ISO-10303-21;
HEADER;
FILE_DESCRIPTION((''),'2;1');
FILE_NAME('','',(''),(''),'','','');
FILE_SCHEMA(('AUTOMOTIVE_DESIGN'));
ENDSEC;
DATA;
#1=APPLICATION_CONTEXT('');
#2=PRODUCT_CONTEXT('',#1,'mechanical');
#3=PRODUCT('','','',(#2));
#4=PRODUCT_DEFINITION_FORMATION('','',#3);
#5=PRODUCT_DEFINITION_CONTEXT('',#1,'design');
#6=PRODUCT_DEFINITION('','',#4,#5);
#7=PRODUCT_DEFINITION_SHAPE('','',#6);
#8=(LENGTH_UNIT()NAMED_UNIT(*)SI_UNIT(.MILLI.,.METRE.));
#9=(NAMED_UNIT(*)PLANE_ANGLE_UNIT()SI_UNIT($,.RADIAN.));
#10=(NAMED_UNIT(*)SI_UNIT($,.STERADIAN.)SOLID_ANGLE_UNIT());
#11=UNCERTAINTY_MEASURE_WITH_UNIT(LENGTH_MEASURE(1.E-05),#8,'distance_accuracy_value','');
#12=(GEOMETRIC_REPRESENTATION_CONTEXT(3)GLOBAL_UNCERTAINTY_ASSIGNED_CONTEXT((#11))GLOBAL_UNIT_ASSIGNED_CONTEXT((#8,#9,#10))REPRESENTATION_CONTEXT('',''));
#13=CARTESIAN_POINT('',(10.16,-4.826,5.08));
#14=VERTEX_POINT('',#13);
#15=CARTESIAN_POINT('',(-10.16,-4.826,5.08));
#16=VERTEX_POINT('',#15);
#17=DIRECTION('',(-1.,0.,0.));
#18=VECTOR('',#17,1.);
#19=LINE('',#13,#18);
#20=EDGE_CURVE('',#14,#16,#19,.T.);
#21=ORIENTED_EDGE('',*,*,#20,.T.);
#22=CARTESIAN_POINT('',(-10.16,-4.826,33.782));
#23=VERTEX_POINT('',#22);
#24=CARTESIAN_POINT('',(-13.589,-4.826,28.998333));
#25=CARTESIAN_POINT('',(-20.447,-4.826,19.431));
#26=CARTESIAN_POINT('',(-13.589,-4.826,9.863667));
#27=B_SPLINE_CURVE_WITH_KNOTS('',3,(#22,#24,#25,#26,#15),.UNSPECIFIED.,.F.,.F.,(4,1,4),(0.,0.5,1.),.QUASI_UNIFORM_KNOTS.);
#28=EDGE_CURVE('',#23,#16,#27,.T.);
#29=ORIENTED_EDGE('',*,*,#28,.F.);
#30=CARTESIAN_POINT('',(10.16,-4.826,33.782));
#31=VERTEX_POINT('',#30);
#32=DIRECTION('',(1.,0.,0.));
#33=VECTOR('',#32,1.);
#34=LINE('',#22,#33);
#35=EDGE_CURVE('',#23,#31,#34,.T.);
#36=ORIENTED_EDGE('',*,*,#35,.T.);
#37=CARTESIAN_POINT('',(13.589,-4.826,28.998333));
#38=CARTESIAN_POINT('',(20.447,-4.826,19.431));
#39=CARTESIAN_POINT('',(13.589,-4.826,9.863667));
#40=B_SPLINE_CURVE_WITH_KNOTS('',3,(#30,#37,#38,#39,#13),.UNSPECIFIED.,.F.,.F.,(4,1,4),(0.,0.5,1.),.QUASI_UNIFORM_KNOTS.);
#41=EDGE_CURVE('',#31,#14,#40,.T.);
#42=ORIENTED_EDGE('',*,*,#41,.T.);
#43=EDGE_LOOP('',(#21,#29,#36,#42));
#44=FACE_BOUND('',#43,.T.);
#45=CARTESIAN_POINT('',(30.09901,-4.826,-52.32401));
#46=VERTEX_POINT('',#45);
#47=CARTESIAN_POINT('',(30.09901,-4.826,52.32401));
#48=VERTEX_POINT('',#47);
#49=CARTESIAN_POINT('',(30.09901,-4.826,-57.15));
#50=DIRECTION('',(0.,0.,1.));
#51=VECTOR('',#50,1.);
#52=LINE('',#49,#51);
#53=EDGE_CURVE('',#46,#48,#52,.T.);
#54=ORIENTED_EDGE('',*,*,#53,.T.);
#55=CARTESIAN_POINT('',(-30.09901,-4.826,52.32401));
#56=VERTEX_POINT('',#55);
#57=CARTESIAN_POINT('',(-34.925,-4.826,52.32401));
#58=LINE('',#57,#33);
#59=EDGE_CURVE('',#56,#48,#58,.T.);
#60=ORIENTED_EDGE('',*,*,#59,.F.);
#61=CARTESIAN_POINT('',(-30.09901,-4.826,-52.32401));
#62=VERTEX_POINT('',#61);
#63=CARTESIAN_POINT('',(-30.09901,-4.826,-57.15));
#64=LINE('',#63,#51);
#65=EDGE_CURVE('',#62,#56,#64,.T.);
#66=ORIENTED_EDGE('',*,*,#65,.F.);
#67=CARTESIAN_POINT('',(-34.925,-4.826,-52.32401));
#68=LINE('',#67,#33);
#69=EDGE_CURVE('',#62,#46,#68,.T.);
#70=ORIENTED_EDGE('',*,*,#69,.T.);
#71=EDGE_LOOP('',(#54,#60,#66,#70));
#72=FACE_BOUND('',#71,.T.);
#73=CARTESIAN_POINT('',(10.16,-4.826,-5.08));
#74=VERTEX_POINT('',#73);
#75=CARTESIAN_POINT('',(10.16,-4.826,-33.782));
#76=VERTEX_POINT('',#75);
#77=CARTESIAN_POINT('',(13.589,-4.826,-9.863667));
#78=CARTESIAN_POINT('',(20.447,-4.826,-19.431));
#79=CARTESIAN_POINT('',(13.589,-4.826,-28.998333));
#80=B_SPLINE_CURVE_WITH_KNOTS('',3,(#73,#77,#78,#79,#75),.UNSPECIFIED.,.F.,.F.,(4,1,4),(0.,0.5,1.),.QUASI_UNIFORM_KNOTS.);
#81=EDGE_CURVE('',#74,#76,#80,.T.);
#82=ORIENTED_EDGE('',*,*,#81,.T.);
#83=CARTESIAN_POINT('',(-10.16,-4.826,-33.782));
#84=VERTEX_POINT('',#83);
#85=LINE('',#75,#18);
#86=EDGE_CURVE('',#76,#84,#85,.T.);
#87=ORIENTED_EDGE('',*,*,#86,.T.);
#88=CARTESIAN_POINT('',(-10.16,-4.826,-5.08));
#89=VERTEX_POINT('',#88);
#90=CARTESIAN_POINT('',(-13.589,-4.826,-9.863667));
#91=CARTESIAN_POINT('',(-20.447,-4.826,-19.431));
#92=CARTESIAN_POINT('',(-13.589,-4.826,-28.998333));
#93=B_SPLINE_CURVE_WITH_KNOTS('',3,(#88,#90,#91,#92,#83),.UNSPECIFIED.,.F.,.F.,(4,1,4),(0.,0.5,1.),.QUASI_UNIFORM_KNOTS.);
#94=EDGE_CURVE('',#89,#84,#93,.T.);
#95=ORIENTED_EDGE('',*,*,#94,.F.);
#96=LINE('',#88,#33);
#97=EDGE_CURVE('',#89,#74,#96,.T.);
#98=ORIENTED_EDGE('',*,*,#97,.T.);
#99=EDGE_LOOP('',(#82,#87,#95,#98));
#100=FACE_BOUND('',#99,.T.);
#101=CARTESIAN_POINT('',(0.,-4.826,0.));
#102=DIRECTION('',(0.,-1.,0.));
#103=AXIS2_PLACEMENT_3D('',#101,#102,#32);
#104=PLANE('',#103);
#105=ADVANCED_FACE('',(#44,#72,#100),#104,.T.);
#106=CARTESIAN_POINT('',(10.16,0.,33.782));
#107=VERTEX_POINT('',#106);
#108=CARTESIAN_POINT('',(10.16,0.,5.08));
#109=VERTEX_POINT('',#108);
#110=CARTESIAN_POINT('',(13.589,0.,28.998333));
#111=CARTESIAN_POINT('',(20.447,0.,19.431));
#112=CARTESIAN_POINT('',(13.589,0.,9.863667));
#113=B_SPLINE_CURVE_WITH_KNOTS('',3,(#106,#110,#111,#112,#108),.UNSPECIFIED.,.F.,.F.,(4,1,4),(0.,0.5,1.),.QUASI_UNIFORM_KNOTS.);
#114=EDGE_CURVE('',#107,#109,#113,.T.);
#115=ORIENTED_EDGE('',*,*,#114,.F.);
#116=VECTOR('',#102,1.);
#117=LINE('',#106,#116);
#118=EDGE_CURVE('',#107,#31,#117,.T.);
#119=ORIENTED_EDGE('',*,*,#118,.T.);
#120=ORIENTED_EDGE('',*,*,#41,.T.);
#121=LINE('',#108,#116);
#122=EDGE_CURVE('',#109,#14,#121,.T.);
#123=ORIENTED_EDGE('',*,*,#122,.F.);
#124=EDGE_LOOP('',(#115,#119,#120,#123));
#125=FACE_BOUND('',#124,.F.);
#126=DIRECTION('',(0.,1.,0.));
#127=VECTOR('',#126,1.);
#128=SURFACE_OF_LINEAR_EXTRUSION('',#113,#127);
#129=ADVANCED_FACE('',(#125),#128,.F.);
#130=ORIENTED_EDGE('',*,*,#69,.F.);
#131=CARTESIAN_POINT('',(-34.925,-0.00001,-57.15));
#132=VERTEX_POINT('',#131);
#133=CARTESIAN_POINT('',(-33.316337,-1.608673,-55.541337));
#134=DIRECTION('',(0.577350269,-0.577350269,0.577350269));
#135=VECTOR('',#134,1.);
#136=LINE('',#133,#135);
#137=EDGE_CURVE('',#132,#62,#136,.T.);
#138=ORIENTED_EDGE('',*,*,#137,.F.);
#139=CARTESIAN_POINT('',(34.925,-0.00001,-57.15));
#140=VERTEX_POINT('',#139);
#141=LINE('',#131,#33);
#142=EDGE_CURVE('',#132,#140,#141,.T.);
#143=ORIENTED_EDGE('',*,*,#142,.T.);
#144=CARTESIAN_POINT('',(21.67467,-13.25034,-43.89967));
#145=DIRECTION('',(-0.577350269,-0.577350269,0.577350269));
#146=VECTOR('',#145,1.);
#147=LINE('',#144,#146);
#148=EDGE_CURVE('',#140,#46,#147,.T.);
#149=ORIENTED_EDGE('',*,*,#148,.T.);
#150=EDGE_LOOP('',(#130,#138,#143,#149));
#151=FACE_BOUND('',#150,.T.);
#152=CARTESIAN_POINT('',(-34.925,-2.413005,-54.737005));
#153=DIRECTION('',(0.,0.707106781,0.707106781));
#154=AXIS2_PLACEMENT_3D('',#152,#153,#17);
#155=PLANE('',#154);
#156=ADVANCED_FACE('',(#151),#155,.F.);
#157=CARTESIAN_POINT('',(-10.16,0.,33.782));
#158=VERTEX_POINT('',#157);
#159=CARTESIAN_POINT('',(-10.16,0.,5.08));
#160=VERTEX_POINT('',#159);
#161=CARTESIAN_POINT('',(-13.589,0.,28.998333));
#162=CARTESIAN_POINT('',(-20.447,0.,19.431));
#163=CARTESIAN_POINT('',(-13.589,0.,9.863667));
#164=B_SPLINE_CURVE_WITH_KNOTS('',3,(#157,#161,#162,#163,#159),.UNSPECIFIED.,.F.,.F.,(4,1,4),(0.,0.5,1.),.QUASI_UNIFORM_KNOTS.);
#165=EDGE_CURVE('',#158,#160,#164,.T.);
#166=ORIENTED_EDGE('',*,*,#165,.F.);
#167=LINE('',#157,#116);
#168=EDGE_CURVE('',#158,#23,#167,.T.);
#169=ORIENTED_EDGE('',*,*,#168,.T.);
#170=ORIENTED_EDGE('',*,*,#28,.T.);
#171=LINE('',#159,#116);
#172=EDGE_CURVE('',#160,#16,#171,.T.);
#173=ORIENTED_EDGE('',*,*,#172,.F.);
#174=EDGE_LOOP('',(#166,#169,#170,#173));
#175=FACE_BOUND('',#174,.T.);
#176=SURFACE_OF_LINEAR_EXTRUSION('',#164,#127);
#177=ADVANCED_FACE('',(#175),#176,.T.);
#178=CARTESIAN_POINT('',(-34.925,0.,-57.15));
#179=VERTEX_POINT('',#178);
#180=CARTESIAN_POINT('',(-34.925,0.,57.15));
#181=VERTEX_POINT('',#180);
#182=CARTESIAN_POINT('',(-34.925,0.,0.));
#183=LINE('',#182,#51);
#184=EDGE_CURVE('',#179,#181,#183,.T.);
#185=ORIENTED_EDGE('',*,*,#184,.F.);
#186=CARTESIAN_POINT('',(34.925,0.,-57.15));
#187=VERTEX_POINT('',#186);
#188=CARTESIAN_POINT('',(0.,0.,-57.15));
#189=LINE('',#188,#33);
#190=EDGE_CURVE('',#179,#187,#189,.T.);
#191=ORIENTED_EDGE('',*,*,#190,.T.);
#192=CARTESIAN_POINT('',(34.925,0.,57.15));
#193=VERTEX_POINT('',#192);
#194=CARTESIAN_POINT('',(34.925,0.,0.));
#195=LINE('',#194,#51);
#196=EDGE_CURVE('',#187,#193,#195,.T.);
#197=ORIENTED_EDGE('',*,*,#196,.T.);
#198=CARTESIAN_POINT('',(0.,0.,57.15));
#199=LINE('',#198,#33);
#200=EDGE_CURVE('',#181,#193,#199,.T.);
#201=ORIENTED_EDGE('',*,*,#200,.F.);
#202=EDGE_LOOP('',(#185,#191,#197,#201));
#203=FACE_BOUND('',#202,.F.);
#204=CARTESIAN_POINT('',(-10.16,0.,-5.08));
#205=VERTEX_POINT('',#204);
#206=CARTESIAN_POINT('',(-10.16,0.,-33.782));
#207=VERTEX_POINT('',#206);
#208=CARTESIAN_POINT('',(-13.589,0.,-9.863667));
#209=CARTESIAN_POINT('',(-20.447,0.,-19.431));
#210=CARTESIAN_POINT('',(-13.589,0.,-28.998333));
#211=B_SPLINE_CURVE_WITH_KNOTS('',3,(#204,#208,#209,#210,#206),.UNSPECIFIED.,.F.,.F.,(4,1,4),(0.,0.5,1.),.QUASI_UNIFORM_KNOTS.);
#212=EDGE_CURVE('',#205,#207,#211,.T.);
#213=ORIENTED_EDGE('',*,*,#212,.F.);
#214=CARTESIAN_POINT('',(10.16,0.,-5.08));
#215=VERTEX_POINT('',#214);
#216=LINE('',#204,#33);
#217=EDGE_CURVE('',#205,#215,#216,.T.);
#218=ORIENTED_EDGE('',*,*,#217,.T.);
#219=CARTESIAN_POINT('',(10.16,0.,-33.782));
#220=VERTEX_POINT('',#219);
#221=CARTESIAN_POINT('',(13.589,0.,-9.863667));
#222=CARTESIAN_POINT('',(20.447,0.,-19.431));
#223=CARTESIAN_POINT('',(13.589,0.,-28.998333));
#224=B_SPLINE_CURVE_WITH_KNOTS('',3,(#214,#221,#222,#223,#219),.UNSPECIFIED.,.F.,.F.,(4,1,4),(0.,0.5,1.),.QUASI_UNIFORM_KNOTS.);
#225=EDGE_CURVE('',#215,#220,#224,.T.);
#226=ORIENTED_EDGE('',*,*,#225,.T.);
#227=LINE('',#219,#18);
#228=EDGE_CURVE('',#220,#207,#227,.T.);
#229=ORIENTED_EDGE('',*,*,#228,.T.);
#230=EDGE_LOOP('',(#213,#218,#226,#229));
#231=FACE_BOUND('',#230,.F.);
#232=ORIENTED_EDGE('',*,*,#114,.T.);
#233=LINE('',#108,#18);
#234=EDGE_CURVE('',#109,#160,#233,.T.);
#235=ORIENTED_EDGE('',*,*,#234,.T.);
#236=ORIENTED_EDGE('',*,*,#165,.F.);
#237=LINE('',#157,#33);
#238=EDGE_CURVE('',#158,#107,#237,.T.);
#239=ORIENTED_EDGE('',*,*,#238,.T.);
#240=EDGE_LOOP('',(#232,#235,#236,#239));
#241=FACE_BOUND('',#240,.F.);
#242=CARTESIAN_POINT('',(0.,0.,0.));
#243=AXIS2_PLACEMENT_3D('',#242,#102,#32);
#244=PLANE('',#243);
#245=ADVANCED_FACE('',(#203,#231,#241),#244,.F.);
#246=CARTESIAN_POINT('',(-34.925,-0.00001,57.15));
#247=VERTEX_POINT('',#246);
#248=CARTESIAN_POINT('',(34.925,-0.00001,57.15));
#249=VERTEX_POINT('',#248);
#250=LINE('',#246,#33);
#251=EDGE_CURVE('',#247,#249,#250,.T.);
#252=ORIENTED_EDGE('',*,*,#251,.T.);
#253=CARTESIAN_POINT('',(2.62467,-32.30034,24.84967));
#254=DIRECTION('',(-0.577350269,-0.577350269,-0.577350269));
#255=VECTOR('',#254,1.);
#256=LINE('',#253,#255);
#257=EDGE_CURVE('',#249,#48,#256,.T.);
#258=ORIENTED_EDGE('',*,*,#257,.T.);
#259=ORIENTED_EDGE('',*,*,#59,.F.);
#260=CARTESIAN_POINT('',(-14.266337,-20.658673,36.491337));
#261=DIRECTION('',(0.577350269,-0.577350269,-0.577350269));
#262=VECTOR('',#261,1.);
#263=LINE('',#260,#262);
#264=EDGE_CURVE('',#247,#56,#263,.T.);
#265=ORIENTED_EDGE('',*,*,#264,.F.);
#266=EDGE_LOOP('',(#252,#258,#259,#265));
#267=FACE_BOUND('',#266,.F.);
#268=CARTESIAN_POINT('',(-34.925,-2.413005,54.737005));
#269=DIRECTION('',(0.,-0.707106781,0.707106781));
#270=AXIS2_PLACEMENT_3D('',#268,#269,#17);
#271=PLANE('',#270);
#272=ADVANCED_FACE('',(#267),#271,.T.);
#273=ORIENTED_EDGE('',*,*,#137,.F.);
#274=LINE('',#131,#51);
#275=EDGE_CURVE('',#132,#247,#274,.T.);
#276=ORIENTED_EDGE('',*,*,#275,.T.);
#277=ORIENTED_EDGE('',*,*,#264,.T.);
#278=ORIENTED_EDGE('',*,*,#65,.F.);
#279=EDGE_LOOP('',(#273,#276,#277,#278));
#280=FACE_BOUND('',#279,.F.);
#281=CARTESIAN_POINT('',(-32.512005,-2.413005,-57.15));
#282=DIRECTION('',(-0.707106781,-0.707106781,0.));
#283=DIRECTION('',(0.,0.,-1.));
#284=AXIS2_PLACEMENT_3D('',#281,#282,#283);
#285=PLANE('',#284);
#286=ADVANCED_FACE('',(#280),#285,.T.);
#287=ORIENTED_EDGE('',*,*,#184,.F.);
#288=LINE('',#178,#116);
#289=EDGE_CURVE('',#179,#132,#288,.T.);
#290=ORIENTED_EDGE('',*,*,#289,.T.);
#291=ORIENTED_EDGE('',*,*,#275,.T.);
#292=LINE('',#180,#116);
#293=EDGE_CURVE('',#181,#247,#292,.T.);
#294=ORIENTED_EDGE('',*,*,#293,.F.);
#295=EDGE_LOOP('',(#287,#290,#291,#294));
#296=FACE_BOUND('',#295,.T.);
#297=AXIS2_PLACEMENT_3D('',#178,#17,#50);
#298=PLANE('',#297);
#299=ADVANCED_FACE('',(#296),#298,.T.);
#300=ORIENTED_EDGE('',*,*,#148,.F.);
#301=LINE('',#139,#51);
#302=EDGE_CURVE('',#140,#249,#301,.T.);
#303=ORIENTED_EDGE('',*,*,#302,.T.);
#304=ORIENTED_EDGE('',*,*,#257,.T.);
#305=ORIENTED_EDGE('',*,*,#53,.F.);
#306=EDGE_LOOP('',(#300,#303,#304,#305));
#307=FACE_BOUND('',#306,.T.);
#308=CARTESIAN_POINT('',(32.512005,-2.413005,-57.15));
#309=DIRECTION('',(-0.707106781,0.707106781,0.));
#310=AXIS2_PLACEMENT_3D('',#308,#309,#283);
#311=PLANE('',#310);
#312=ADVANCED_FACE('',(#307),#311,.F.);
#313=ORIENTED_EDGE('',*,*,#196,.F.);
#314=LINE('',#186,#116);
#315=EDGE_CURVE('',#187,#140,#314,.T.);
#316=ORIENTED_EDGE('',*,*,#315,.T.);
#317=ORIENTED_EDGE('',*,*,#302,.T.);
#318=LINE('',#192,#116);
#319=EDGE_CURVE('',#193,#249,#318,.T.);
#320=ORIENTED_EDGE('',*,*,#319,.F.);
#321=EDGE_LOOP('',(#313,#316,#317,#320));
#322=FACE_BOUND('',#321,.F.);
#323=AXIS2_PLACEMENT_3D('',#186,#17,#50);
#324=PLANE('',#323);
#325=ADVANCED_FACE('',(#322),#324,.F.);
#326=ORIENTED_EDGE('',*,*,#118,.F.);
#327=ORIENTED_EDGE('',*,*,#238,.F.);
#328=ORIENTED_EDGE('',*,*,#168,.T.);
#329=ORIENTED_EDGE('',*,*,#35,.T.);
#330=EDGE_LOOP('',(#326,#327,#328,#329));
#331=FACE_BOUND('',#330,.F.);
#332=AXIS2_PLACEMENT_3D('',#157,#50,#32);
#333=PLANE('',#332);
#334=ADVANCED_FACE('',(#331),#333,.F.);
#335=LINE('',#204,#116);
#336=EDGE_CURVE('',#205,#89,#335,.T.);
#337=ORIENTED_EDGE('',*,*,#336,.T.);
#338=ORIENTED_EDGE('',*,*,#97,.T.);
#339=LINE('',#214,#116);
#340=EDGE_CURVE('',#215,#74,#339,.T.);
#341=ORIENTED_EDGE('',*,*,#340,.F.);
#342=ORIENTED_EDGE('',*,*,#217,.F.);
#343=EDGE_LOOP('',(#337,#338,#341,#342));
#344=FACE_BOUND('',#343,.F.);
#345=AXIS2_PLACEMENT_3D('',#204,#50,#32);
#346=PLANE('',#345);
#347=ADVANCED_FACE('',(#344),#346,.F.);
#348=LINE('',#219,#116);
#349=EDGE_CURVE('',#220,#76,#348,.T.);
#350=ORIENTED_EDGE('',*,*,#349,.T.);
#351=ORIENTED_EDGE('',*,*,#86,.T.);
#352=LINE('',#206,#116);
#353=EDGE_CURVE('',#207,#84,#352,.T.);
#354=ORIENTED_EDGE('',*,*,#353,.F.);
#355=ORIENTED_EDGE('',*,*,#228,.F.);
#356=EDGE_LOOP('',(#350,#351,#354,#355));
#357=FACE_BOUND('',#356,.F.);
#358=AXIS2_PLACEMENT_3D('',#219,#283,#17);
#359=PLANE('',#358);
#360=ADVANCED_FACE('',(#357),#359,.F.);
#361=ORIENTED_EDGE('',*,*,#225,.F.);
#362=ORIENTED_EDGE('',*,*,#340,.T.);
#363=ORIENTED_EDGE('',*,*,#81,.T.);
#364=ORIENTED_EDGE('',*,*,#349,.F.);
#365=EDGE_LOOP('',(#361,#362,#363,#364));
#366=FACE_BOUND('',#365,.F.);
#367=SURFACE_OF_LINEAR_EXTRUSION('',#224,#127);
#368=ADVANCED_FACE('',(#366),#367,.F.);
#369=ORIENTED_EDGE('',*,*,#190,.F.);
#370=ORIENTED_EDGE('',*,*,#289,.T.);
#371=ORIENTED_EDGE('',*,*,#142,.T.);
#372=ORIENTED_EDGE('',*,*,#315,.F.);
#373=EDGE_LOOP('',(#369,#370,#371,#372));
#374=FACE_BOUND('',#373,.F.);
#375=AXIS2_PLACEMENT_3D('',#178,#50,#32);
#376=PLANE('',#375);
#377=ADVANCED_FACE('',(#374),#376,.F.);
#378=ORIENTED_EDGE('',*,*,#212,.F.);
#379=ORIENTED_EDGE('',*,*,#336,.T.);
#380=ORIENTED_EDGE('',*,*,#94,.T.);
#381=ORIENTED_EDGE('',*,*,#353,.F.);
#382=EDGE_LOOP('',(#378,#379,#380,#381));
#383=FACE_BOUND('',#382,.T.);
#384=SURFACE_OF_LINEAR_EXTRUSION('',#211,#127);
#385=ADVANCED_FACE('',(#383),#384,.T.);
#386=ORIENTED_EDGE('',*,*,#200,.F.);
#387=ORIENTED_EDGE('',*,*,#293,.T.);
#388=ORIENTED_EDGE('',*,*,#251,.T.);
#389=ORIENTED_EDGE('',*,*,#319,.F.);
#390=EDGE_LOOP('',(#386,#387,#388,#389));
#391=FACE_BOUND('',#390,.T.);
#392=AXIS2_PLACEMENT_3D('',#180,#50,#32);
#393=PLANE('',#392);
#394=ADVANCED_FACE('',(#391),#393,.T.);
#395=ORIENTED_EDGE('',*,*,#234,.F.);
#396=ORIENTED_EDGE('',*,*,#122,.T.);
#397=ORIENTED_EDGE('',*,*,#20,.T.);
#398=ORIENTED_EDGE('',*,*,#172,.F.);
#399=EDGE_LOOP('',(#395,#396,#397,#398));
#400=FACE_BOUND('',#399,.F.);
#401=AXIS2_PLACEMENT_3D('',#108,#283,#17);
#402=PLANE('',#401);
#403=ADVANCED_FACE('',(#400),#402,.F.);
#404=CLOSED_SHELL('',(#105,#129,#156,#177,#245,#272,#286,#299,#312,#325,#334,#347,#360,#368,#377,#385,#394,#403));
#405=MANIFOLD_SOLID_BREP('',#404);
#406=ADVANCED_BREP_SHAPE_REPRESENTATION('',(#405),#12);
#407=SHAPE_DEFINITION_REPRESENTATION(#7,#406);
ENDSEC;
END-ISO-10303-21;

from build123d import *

# Parameters (mm, degrees)
F0_W     = 69.85
F0_H     = 114.3
F1_DEPTH = 4.826
F2_SIZE  = 4.82599


# Not quite as in the source:
# - a fillet or chamfer is up to 0.001 mm smaller than in the source, because OpenCascade refuses the exact size


with BuildPart() as f1:
    # F0 (on Front) → F1 (new body)
    with BuildSketch(Plane.XZ):
        Rectangle(F0_W, F0_H)
        with BuildLine():
            add(Edge.make_bspline(
                [(-10.16, -5.08), (-13.589, -9.8636666667), (-20.447, -19.431), (-13.589, -28.9983333333), (-10.16, -33.782)],
                knots=[0, 0, 0, 0, 0.5, 1, 1, 1, 1], degree=3))
            Line((-10.16, -5.08), (10.16, -5.08))
            add(Edge.make_bspline(
                [(10.16, -5.08), (13.589, -9.8636666667), (20.447, -19.431), (13.589, -28.9983333333), (10.16, -33.782)],
                knots=[0, 0, 0, 0, 0.5, 1, 1, 1, 1], degree=3))
            Line((10.16, -33.782), (-10.16, -33.782))
        make_face(mode=Mode.SUBTRACT)
        with BuildLine():
            add(Edge.make_bspline(
                [(-10.16, 33.782), (-13.589, 28.9983333333), (-20.447, 19.431), (-13.589, 9.8636666667), (-10.16, 5.08)],
                knots=[0, 0, 0, 0, 0.5, 1, 1, 1, 1], degree=3))
            Line((-10.16, 33.782), (10.16, 33.782))
            add(Edge.make_bspline(
                [(10.16, 33.782), (13.589, 28.9983333333), (20.447, 19.431), (13.589, 9.8636666667), (10.16, 5.08)],
                knots=[0, 0, 0, 0, 0.5, 1, 1, 1, 1], degree=3))
            Line((10.16, 5.08), (-10.16, 5.08))
        make_face(mode=Mode.SUBTRACT)
    extrude(amount=F1_DEPTH)

    # F2 (size 4.826 in the source; OpenCascade refuses exactly that, so slightly less here)
    f2_edges = [f1.edges().sort_by_distance(p)[0] for p in [
        (-34.925, -4.826, 0),
        (0, -4.826, 57.15),
        (34.925, -4.826, 0),
        (0, -4.826, -57.15),
    ]]
    chamfer(f2_edges, length=F2_SIZE)


solid = f1.part
